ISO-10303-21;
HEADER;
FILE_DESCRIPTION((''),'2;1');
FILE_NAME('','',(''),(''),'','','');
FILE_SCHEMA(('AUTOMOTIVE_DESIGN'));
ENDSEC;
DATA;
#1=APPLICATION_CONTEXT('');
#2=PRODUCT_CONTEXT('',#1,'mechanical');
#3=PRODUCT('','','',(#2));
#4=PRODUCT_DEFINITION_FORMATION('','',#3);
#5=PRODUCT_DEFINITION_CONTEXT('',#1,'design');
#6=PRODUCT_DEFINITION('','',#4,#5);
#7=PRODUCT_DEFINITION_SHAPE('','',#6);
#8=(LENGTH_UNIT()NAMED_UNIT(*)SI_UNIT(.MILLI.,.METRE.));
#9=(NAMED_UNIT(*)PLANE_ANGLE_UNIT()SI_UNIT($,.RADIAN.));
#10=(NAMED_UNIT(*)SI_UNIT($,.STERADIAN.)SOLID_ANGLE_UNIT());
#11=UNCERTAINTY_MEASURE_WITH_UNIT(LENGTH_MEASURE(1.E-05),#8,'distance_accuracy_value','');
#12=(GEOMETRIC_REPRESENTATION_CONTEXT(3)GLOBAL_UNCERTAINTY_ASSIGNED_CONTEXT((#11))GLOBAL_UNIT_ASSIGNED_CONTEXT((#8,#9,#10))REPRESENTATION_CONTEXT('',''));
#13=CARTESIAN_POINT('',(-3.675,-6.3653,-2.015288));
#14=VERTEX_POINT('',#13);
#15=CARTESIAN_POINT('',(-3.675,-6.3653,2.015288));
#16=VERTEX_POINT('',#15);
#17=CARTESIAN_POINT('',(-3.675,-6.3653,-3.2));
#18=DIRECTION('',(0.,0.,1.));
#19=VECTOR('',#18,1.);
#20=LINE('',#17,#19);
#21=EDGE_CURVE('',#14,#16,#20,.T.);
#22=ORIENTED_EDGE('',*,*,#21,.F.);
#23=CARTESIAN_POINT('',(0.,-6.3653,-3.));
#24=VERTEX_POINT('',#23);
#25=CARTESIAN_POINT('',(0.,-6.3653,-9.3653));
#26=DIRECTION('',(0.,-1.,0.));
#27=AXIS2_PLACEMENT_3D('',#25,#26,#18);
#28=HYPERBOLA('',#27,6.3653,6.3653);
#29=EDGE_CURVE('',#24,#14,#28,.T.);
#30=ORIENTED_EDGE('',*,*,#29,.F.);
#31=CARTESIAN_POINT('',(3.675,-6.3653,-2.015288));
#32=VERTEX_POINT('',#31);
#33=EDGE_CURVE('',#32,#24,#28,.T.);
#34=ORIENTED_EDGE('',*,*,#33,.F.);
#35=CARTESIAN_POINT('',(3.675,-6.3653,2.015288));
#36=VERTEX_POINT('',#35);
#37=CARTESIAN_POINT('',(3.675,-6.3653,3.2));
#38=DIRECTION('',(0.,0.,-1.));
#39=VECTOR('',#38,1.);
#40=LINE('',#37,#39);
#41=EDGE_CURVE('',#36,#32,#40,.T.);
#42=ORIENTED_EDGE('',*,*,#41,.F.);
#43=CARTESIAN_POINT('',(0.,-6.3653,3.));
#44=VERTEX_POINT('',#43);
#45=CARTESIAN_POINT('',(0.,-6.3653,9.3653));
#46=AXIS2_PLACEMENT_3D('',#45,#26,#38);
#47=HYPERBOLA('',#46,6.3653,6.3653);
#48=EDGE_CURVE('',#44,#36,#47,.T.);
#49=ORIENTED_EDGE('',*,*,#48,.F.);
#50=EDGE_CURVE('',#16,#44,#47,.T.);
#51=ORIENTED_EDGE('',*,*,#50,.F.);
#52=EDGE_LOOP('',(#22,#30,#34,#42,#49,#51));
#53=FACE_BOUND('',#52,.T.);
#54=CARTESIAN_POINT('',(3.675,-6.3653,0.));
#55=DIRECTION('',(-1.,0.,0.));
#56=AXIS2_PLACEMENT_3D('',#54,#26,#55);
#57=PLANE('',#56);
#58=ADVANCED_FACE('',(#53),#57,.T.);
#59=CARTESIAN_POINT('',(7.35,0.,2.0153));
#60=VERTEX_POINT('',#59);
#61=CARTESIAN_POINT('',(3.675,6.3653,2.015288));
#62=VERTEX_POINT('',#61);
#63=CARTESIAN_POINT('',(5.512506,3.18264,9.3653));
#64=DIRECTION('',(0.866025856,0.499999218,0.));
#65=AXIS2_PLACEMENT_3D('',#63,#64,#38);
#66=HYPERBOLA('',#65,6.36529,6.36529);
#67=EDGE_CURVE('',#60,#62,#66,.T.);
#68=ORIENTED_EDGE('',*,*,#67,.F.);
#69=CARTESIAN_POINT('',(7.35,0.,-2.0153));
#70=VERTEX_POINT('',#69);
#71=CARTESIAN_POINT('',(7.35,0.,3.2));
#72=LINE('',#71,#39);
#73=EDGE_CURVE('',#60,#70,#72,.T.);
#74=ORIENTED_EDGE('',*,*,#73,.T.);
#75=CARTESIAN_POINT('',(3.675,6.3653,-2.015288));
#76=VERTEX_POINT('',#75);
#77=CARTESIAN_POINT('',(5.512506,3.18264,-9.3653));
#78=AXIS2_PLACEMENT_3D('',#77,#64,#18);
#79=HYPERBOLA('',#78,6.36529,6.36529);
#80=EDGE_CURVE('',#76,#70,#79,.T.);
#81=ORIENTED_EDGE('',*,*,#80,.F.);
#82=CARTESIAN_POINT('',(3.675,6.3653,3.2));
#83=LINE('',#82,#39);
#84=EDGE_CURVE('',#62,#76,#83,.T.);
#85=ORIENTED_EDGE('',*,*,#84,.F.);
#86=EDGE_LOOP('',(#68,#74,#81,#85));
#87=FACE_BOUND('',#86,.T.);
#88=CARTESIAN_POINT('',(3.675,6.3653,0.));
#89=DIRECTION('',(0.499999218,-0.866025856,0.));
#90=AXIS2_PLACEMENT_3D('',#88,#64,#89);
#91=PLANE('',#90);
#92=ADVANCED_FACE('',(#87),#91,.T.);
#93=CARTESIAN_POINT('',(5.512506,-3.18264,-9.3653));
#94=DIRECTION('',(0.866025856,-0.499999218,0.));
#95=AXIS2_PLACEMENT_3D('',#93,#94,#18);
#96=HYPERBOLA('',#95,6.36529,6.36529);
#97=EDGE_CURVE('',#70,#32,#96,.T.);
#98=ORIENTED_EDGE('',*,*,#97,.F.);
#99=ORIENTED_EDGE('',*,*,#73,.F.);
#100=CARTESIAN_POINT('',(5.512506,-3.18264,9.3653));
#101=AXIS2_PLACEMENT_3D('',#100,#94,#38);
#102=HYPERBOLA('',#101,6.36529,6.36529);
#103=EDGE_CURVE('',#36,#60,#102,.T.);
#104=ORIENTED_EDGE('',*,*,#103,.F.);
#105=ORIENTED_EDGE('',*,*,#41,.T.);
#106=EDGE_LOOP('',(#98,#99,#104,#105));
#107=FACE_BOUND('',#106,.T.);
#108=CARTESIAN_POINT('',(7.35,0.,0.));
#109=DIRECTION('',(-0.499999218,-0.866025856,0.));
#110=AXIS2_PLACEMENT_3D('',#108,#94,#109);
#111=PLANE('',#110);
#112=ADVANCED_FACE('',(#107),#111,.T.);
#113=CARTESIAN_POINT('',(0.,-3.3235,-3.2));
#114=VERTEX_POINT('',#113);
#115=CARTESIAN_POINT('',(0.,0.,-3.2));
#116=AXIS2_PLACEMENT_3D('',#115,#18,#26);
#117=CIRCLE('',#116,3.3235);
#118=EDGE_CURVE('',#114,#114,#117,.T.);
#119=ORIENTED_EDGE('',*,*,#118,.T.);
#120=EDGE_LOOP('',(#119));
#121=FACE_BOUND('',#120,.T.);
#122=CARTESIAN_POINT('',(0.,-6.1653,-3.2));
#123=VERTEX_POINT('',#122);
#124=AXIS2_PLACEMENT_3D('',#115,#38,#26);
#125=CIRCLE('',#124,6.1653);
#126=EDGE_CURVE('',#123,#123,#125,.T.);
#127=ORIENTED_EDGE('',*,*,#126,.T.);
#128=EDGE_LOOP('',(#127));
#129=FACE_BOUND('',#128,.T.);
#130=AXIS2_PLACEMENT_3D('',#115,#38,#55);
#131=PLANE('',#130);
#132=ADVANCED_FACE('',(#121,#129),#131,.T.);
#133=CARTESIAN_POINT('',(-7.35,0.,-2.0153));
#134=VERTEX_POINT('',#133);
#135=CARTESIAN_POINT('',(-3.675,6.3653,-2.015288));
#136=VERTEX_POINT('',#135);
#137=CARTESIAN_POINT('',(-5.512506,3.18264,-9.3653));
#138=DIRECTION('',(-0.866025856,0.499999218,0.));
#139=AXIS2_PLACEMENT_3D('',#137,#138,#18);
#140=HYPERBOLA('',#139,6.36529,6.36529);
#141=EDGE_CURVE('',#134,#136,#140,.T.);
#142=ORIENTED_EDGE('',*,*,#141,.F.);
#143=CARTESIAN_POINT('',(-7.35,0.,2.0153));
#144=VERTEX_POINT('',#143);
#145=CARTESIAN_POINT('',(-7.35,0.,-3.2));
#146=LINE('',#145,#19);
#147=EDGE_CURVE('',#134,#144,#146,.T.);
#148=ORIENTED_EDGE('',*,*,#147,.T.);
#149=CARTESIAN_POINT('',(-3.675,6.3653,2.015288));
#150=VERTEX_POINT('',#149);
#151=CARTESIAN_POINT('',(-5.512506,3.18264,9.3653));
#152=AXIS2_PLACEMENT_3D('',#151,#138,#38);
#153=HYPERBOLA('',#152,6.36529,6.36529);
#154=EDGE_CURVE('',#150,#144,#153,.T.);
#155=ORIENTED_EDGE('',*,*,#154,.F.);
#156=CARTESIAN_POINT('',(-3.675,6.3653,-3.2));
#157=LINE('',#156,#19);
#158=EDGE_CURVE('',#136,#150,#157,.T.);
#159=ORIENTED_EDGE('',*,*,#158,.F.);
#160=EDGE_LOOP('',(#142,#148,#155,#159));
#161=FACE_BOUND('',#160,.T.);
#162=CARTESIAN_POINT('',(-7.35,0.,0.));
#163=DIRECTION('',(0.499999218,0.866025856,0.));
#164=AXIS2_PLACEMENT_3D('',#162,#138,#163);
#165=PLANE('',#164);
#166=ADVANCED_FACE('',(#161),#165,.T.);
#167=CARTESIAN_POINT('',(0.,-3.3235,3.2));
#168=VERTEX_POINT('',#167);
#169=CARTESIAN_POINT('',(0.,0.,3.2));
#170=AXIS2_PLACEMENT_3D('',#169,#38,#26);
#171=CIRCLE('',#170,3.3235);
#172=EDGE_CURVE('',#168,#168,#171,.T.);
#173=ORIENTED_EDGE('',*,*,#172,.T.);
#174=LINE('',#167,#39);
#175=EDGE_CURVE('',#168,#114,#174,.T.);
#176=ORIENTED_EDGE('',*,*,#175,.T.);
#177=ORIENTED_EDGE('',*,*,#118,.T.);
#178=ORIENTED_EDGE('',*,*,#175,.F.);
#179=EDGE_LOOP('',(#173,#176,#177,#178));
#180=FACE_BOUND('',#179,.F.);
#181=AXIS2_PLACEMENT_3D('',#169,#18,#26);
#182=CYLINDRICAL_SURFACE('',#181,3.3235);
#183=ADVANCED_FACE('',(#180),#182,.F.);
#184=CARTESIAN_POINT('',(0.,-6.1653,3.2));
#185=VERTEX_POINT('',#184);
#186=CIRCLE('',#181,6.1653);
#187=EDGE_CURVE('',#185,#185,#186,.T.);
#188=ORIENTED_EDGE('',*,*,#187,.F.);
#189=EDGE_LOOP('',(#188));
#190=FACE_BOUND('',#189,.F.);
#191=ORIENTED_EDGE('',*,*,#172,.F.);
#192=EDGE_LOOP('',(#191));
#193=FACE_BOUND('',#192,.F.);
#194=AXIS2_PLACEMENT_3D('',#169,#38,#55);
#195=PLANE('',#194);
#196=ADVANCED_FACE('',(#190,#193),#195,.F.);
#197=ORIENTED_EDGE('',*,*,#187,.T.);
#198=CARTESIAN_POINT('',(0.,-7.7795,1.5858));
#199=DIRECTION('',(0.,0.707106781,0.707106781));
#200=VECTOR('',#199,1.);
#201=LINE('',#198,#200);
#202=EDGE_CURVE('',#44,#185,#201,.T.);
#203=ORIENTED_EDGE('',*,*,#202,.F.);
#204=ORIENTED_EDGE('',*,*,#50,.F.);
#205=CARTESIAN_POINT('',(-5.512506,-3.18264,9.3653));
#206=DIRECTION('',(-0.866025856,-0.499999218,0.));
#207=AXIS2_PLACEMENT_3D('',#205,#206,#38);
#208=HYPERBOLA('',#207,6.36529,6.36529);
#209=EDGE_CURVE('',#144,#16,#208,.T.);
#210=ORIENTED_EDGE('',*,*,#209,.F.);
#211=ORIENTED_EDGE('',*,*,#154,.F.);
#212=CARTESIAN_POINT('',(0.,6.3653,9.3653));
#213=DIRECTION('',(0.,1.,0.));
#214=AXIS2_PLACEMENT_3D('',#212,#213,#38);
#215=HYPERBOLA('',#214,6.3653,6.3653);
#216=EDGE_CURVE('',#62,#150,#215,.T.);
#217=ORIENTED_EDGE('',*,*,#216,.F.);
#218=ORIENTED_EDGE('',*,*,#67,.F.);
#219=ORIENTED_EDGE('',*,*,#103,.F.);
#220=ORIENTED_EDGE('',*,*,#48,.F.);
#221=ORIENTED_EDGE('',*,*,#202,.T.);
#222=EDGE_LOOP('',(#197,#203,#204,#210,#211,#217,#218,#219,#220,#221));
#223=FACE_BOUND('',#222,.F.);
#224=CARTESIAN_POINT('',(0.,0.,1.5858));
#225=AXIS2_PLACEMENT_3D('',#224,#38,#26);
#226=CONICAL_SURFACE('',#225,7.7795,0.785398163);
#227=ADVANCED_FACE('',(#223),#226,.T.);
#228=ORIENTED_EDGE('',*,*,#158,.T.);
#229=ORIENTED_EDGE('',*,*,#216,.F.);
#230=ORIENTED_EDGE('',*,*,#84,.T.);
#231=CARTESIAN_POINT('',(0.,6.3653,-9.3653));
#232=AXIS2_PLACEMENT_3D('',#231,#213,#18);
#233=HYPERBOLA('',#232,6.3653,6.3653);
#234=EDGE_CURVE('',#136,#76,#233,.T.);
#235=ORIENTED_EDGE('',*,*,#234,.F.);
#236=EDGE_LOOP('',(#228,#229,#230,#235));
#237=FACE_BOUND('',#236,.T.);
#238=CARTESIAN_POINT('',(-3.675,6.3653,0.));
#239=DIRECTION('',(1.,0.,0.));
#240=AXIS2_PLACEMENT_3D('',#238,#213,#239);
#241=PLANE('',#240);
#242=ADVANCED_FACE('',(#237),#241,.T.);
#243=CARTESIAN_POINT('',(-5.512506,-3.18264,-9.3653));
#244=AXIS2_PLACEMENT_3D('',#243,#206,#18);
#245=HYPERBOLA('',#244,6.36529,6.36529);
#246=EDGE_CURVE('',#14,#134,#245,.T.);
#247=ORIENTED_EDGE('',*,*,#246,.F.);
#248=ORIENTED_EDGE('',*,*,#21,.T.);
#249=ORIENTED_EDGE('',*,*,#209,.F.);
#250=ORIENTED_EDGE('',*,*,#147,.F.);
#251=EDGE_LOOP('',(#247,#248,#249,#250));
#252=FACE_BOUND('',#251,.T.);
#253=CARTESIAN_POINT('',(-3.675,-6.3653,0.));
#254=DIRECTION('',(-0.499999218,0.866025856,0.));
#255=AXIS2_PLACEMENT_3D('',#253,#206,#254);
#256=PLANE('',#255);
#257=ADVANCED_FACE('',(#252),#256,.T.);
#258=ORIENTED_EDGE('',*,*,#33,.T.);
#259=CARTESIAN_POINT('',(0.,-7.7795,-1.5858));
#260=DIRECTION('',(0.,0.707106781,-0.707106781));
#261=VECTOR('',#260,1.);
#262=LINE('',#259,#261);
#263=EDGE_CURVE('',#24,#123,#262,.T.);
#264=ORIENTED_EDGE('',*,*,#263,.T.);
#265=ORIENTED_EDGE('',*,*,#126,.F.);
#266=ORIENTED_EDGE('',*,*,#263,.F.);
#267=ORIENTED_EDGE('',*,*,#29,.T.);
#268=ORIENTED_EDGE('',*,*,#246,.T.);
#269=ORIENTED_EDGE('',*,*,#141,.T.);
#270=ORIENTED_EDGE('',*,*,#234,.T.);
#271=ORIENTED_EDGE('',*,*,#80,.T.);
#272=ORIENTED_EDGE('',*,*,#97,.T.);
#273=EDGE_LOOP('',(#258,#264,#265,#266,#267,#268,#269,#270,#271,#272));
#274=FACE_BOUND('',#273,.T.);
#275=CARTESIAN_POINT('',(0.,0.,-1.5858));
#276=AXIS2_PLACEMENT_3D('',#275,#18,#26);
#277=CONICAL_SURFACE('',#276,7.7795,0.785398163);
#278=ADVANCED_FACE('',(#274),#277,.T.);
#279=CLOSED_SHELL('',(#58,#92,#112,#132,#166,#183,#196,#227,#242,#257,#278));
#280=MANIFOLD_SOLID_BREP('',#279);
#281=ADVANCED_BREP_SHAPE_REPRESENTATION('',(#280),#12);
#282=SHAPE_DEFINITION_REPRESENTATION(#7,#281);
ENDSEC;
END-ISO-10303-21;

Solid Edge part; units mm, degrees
sketch "Sketch1" plane through (0, 0, 0) normal (0, 0, 1) x (1, 0, 0)
  line L0 (-3.675, 6.3653) -> (3.675, 6.3653)
  line L1 (3.675, 6.3653) -> (7.35, 0)
  line L2 (7.35, 0) -> (3.675, -6.3653)
  line L3 (3.675, -6.3653) -> (-3.675, -6.3653)
  line L4 (-3.675, -6.3653) -> (-7.35, 0)
  line L5 (-7.35, 0) -> (-3.675, 6.3653)
extrude "Protrusion1" add sketch "Sketch1" along normal mid plane 6.4
sketch "Sketch2" plane through (0, -5.5125, 6.3) normal (-1, 0, 0) x (0, 1, 0)
  line L0 (-2.267, 7.8858) -> (0.5614, 10.7142)
  line L1 (-2.267, 7.8858) -> (-2.267, 4.7142)
  line L2 (-2.267, 4.7142) -> (0.5614, 1.8858)
revolve "RevolvedCutout1" cut sketch "Sketch2" angle 360 about axis through (0, 0, 0.5943) along (0, 0, -1) material side at (0, -6.4007, -3.0354)
hole "Hole_1" at (0, 0, 3.2) direction (0, 0, -1) diameter 6.647 end up to next
